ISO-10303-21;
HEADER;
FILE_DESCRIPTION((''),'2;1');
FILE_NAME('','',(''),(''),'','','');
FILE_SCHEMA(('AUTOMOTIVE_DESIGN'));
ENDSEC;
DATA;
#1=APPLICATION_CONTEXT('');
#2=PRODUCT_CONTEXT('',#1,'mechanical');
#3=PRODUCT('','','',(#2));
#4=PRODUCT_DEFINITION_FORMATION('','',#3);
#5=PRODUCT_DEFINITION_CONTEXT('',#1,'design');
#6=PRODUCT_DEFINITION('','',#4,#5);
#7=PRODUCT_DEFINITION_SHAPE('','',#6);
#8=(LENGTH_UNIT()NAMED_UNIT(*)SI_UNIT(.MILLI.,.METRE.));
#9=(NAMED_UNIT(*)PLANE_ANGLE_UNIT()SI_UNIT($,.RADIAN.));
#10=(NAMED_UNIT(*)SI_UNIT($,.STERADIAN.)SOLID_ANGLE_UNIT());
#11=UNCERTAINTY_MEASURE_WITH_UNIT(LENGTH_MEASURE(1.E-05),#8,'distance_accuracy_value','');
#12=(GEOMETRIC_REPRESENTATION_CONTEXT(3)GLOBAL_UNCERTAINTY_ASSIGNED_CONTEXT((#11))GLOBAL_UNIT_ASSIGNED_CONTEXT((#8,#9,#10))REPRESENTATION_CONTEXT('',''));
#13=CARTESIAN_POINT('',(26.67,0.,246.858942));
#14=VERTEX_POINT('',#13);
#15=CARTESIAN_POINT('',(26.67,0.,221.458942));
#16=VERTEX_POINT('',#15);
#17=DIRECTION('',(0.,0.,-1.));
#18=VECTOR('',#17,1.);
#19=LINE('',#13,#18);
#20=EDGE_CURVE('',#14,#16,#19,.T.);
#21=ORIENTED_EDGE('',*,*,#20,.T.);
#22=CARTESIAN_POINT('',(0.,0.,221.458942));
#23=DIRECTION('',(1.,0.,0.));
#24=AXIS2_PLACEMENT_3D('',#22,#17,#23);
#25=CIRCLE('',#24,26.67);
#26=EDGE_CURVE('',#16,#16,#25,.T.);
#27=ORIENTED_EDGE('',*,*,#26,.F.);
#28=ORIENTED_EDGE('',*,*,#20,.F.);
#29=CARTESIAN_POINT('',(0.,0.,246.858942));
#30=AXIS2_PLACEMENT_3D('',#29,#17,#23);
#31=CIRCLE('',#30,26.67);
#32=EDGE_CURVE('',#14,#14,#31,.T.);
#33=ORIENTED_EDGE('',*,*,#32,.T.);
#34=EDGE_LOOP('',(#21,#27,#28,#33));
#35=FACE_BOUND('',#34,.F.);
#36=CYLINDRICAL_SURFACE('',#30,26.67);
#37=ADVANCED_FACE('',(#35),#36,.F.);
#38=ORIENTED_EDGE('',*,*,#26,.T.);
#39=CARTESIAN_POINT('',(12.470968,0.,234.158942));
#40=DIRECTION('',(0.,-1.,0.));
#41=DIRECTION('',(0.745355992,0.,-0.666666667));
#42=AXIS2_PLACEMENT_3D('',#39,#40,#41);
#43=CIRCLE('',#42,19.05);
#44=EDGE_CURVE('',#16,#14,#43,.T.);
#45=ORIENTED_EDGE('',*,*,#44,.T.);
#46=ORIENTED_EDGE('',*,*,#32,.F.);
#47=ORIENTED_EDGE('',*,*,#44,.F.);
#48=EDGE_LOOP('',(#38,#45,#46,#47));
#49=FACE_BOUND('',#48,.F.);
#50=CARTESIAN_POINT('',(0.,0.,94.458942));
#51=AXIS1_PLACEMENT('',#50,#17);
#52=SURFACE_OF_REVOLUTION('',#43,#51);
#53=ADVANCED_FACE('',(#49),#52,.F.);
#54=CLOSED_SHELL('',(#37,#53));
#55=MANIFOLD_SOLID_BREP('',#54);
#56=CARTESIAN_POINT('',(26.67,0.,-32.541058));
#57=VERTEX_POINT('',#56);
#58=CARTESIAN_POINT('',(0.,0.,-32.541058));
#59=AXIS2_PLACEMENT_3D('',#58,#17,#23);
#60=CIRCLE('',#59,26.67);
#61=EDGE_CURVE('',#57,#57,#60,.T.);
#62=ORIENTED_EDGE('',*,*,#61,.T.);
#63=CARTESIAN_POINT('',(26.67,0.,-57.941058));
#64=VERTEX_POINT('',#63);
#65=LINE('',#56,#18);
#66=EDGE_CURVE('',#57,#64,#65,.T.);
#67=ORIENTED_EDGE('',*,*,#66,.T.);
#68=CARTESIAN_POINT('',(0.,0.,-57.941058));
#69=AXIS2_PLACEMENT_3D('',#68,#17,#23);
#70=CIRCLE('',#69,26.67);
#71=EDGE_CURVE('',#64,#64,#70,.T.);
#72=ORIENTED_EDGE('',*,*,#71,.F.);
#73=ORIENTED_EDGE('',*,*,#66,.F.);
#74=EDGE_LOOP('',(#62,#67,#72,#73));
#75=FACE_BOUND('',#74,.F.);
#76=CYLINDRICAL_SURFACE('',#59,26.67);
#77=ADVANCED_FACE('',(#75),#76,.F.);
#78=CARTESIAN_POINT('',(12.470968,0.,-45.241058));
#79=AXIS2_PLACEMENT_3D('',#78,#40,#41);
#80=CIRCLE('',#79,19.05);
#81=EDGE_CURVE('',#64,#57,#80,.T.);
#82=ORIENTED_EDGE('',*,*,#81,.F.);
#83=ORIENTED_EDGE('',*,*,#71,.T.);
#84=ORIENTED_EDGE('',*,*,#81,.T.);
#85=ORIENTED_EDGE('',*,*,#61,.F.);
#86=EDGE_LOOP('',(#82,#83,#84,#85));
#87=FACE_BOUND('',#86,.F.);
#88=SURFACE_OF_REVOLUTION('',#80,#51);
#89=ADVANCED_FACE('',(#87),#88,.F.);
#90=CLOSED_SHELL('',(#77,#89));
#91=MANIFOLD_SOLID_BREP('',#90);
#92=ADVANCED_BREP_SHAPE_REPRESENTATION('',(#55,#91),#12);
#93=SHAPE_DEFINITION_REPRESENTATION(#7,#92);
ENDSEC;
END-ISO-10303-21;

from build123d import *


# Not quite as in the source:
# - the program builds the solid bodies; features that only make, move or delete a surface that nothing else refers to are left out


with BuildPart() as f2:
    # F0 (on Front) → F2 (revolve)
    with BuildSketch(Plane.XZ):
        with BuildLine():
            ThreePointArc((26.67, -57.9410577214), (31.5209683429, -45.2410577214), (26.67, -32.5410577214))
            Line((26.67, -32.5410577214), (26.67, -57.9410577214))
        make_face()
    revolve(axis=Axis((0, 0, 94.4589422786), (0, 0, -1)))


with BuildPart() as f2b:
    # F0 (on Front) → F2, piece 2 (revolve)
    with BuildSketch(Plane.XZ):
        with BuildLine():
            ThreePointArc((26.67, 221.4589422786), (31.5209683429, 234.1589422786), (26.67, 246.8589422786))
            Line((26.67, 246.8589422786), (26.67, 221.4589422786))
        make_face()
    revolve(axis=Axis((0, 0, 94.4589422786), (0, 0, -1)))


solid = Compound([f2.part, f2b.part])
